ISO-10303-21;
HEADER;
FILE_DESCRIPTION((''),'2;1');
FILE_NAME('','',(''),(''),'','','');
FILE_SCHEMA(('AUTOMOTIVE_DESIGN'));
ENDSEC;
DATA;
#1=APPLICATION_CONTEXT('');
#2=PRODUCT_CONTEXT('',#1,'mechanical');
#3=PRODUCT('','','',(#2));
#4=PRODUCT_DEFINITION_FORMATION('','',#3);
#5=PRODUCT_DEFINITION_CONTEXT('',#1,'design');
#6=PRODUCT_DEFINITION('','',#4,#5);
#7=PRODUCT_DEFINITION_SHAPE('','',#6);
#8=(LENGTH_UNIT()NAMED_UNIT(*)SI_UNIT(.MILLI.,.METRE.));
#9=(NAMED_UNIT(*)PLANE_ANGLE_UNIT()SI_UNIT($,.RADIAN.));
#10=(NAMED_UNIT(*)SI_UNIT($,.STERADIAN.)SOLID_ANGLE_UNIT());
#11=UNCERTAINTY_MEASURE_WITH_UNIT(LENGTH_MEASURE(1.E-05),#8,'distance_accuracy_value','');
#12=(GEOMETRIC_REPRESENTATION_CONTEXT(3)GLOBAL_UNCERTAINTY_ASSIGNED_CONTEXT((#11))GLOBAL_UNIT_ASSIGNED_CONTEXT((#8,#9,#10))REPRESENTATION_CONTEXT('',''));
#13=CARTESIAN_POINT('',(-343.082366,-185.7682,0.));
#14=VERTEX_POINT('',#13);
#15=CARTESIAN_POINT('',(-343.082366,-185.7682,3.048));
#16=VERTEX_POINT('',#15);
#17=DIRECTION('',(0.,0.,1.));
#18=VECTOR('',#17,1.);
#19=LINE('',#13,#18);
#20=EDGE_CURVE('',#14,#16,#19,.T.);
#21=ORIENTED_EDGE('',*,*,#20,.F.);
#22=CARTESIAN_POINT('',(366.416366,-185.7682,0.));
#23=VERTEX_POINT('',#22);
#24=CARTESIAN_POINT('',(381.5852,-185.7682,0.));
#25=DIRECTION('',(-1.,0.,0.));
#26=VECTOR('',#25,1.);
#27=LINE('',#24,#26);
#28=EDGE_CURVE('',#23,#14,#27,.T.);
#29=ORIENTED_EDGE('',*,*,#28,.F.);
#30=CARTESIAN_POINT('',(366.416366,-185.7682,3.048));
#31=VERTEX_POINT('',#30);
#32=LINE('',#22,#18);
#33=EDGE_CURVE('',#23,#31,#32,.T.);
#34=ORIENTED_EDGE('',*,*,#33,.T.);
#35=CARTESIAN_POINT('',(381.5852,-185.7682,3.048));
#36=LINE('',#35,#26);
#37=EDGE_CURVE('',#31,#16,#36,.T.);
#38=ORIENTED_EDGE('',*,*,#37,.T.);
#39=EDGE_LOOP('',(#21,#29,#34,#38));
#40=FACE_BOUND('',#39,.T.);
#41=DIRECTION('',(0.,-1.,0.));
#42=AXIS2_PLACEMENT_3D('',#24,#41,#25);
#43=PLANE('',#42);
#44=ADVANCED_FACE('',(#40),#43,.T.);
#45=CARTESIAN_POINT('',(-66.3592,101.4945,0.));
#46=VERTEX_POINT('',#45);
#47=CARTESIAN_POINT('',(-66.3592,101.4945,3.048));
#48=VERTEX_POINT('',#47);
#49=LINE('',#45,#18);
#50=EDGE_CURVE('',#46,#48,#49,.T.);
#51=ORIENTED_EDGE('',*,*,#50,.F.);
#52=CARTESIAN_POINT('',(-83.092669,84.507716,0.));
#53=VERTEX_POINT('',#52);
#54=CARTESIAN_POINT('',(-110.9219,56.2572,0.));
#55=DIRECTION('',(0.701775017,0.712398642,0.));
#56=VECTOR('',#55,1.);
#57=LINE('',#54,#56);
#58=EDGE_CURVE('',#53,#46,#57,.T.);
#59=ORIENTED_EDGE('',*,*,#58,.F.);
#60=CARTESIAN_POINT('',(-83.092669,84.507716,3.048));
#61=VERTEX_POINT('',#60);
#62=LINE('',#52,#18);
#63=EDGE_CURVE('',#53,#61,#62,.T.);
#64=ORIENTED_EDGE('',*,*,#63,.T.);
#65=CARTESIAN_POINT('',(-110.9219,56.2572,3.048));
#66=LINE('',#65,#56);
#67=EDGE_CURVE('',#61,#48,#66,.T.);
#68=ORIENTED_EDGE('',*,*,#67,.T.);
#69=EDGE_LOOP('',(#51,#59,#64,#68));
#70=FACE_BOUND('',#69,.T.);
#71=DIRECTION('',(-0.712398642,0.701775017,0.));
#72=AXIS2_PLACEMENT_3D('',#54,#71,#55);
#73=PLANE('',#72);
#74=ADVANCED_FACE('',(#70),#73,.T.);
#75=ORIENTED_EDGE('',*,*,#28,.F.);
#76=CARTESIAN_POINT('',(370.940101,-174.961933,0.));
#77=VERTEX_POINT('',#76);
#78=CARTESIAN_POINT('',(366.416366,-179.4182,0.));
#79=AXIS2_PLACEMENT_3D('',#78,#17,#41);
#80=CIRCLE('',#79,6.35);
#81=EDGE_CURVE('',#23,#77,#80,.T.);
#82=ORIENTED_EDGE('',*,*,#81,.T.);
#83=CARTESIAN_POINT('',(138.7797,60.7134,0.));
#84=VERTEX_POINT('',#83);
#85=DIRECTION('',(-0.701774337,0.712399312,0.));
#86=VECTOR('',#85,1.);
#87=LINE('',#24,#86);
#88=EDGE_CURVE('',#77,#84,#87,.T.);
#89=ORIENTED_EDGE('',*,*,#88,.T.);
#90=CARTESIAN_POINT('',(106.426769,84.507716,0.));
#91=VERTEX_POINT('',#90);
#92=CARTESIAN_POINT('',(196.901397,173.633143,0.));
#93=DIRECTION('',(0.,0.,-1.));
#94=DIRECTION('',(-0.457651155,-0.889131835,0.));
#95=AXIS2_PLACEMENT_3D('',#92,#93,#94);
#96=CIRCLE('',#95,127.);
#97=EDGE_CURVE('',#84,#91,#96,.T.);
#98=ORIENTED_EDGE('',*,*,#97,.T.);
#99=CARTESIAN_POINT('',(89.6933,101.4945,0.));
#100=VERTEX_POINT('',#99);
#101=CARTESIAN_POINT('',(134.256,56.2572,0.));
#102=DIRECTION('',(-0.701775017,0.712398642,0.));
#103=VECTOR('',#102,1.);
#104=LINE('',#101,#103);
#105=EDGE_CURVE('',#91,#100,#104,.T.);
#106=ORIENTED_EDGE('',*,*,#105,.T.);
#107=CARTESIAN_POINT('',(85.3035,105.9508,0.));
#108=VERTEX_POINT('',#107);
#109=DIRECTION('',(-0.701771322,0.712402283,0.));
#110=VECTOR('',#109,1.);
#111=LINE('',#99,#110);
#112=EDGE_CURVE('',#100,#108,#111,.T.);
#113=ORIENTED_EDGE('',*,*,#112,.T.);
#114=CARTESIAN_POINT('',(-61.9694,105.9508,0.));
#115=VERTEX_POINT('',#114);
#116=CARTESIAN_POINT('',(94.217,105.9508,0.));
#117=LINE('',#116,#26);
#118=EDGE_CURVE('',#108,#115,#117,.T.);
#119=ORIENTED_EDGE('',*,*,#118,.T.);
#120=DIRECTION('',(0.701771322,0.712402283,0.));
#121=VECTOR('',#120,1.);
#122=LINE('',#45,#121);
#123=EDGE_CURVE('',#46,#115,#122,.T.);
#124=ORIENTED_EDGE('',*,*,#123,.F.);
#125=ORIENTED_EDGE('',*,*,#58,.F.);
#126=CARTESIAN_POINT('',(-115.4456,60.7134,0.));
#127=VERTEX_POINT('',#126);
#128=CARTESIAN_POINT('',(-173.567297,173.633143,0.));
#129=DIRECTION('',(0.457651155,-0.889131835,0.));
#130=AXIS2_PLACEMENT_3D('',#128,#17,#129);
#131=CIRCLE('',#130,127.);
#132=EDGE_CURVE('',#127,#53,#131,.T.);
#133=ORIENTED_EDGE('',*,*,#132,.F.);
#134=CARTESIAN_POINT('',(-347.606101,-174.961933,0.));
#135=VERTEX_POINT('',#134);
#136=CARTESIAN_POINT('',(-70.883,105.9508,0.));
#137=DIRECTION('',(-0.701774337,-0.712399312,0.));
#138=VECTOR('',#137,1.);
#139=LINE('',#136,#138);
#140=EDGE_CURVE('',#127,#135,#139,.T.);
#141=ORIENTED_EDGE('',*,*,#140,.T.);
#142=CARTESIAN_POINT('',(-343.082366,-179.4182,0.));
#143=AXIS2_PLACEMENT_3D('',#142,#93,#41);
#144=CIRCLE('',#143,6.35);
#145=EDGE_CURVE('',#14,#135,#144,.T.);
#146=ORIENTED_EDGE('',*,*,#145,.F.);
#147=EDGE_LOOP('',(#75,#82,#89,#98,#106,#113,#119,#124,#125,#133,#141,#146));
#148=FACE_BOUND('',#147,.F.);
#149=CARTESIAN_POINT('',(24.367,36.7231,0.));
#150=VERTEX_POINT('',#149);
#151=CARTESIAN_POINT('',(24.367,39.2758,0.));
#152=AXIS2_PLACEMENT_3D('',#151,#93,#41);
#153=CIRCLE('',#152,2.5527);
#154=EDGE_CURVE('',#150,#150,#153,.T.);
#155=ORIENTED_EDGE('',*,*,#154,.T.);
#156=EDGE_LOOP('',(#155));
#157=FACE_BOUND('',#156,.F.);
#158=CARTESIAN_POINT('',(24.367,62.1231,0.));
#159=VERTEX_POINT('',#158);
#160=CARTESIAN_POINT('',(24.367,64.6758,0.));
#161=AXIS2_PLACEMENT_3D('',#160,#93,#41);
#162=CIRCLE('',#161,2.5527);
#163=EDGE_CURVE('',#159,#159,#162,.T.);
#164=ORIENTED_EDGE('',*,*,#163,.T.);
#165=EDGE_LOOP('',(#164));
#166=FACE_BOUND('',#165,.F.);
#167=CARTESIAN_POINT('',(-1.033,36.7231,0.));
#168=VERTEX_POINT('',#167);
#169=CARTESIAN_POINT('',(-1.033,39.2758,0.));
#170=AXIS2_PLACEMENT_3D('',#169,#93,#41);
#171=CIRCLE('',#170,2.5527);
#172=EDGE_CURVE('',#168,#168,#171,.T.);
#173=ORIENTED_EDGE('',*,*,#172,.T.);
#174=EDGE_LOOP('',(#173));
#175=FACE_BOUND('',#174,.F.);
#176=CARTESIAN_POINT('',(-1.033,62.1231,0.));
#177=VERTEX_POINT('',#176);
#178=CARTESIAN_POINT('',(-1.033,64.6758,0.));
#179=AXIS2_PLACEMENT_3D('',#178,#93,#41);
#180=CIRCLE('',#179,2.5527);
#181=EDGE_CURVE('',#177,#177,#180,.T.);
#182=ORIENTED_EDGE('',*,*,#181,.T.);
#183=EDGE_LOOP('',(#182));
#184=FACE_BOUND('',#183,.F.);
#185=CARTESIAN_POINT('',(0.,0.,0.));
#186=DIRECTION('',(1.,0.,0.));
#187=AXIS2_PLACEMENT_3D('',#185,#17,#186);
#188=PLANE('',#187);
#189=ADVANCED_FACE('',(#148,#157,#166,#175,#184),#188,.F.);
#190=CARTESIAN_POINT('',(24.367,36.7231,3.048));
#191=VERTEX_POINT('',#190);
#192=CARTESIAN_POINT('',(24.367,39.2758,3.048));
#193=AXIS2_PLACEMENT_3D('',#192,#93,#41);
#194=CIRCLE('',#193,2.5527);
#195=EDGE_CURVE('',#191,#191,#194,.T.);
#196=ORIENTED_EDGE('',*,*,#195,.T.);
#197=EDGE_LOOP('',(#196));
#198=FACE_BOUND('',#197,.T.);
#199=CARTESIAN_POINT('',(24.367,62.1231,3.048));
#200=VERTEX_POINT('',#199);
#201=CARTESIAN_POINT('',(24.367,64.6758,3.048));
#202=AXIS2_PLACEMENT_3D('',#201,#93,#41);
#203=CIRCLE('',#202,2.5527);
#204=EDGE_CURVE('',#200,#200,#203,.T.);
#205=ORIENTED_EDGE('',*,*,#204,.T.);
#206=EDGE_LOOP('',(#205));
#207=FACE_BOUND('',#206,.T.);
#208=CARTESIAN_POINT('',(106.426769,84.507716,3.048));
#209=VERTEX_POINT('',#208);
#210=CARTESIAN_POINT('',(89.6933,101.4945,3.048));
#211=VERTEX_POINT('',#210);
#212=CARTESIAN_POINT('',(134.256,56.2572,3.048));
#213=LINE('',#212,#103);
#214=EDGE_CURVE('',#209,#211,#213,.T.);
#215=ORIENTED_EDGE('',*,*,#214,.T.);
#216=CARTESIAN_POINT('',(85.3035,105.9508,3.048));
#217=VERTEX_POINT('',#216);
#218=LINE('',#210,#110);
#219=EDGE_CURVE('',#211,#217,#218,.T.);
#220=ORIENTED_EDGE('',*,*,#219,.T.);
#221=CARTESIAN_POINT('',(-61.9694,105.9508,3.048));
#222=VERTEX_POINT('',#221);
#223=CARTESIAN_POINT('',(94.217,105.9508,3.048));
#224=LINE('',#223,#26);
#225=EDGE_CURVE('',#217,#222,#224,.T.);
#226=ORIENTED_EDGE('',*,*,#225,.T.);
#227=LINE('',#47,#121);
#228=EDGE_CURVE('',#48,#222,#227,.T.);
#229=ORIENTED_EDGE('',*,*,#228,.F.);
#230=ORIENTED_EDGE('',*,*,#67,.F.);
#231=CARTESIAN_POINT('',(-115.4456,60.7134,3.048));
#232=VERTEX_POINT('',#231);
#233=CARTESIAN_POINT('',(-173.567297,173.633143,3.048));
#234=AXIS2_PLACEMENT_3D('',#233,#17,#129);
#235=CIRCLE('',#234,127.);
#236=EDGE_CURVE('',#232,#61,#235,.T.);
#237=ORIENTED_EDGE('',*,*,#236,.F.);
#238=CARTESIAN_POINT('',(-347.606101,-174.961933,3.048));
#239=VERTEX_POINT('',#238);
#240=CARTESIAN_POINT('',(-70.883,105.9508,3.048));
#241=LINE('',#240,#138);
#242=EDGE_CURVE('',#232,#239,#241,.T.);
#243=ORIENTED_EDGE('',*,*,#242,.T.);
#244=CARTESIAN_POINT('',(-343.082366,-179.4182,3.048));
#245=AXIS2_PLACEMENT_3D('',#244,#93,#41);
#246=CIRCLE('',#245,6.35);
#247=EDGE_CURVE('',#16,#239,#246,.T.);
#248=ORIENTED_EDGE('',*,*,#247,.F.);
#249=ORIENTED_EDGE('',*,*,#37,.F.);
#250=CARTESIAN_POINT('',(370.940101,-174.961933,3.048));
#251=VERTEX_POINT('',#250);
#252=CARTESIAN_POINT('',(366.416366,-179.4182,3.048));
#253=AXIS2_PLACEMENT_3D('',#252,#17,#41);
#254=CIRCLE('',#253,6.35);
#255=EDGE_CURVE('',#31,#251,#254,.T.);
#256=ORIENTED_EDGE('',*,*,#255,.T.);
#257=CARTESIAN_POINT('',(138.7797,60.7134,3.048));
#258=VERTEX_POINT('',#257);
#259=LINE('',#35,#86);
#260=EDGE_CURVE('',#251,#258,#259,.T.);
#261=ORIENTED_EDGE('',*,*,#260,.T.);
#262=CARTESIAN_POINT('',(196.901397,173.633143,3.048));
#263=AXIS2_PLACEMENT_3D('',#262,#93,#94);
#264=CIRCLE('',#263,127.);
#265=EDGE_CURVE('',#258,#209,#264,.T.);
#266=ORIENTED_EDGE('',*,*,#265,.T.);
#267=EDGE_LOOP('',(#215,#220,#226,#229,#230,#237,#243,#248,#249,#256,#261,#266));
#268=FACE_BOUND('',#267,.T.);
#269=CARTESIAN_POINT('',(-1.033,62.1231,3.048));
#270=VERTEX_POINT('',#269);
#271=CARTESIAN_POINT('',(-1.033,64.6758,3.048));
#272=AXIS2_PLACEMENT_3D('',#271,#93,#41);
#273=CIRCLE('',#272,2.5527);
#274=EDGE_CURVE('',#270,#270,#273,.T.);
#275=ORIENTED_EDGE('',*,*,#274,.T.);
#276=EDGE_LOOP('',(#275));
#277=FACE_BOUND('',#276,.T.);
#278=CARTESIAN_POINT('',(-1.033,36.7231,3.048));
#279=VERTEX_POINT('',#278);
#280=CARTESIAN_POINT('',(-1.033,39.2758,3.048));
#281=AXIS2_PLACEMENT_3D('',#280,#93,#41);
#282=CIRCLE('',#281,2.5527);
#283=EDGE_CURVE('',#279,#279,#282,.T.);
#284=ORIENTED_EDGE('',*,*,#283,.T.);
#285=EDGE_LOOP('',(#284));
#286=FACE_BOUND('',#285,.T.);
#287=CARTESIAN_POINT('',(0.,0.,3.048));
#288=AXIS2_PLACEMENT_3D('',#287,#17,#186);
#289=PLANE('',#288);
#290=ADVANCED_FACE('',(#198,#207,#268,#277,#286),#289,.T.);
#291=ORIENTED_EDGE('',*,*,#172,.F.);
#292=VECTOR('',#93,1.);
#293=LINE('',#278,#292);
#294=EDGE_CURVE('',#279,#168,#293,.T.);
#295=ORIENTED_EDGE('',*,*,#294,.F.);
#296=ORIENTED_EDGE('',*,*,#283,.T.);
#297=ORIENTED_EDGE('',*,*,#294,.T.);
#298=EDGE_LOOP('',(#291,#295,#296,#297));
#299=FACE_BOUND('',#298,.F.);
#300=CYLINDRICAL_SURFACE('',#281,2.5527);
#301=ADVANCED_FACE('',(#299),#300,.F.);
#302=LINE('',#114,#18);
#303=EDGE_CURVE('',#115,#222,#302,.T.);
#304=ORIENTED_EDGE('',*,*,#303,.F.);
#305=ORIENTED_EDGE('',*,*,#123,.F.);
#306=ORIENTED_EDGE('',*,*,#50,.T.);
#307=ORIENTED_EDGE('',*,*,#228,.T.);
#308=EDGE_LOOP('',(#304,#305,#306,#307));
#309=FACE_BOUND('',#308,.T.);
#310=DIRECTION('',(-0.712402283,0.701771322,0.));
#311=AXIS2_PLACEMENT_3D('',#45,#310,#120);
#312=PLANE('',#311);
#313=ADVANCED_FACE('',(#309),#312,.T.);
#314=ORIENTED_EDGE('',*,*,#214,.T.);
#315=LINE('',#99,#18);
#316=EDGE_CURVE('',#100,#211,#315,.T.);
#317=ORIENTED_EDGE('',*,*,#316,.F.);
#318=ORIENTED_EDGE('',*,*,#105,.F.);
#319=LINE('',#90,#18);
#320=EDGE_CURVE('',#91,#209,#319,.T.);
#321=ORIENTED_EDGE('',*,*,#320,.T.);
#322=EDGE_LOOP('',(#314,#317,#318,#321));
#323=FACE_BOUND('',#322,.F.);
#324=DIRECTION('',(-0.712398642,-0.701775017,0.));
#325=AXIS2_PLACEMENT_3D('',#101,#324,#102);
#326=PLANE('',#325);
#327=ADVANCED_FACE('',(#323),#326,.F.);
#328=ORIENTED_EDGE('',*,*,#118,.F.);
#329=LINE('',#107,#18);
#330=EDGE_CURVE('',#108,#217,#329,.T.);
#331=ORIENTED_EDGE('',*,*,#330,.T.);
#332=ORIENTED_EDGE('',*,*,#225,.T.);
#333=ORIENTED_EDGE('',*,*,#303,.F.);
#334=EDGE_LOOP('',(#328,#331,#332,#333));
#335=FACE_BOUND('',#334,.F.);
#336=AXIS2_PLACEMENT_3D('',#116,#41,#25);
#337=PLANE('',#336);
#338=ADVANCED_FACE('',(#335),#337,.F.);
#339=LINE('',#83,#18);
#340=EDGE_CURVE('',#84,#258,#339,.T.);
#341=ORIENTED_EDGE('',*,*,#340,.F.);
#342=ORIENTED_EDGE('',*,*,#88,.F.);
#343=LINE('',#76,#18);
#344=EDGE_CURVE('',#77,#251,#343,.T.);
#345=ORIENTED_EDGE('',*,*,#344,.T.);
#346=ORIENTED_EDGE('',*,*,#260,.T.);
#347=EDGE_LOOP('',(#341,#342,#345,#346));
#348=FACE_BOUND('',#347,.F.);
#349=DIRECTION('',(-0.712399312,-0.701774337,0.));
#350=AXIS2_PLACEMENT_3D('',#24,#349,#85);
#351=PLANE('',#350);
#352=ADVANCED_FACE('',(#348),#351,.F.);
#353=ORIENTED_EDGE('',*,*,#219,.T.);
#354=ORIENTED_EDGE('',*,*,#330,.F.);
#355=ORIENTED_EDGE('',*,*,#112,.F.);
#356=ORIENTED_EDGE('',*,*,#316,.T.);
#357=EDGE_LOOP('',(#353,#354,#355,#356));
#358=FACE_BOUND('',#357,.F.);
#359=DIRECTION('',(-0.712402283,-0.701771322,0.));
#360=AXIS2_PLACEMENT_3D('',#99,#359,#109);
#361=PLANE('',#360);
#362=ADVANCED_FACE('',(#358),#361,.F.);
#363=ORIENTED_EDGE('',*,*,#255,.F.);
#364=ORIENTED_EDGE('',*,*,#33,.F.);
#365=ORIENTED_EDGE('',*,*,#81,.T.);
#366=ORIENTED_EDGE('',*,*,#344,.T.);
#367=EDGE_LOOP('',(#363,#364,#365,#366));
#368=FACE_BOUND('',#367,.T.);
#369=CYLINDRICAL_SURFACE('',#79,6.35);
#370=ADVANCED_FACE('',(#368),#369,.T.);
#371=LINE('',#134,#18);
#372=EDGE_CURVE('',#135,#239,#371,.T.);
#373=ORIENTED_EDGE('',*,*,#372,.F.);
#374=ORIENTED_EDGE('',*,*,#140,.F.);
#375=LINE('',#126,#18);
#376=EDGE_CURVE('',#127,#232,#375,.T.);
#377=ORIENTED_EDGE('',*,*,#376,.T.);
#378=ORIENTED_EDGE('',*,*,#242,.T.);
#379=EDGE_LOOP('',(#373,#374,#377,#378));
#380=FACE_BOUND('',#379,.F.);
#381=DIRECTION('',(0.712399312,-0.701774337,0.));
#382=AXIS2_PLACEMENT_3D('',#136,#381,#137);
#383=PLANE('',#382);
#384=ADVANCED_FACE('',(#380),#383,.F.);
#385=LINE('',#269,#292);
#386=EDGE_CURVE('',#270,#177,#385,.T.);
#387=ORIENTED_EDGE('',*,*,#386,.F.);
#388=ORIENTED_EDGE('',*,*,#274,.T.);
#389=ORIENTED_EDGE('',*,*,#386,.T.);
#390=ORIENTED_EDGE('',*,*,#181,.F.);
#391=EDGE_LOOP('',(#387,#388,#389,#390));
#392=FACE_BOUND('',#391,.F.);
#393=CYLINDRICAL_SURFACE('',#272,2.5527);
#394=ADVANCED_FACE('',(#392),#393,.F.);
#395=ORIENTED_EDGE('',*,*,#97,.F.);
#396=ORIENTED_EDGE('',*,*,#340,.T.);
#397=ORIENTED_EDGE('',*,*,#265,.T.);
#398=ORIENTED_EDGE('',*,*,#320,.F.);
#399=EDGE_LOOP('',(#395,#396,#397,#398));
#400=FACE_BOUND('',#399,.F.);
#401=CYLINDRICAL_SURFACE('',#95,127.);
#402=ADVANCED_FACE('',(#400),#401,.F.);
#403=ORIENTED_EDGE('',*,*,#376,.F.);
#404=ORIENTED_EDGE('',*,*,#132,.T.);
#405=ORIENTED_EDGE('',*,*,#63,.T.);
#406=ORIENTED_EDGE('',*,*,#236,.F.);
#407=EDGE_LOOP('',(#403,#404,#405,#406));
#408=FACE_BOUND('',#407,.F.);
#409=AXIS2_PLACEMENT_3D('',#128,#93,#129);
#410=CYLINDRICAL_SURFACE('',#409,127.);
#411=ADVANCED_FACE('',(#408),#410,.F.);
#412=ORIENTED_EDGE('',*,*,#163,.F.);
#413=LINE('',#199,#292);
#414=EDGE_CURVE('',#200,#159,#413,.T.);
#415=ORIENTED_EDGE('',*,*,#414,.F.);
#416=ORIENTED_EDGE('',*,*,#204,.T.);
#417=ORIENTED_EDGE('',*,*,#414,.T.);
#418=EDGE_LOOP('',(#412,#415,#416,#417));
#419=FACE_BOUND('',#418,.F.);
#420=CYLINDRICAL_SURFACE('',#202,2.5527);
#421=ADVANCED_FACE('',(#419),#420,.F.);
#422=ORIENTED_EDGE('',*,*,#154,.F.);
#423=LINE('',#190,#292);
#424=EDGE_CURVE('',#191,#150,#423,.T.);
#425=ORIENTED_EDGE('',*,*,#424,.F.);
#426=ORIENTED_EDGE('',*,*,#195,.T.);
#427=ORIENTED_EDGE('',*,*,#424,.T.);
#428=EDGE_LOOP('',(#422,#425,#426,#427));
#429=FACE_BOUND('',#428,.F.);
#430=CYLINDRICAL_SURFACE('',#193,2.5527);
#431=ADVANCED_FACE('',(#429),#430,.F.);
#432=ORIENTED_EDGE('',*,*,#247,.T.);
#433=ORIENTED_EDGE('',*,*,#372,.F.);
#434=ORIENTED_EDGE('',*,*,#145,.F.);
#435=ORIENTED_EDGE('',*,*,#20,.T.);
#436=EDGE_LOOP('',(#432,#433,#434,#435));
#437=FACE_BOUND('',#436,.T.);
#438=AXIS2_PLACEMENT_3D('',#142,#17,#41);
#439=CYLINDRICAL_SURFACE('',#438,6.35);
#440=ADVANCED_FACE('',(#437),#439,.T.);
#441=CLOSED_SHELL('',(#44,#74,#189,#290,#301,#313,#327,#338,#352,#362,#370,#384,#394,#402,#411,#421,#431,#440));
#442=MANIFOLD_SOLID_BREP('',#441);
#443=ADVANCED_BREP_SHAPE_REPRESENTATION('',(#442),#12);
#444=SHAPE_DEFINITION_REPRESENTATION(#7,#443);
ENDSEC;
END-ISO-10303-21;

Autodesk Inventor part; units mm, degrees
ref_plane "YZ Plane" through (0, 0, 0) normal (1, 0, 0) x (0, 1, 0)
ref_plane "XZ Plane" through (0, 0, 0) normal (0, 1, 0) x (-1, 0, 0)
ref_plane "XY Plane" through (0, 0, 0) normal (0, 0, 1) x (1, 0, 0)
sketch "Sketch1" plane through (0, 0, 0) normal (0, 0, 1) x (1, 0, 0)
  line L0 (381.5852, -185.7682) -> (94.217, 105.9508)
  line L1 (94.217, 105.9508) -> (-70.883, 105.9508)
  line L2 (-70.883, 105.9508) -> (-358.2512, -185.7682)
  line L3 (1105.6551, 353.06) -> (-810.8916, 353.06) construction
  line L4 (381.5852, -185.7682) -> (-358.2512, -185.7682)
  dimension "d4" = 165.1
  dimension "d7" = 291.719
extrude "Plate1" add sketch "Sketch1" along normal blind 3.048
sketch "Sketch2" plane through (0, 0, 3.048) normal (0, 0, 1) x (1, 0, 0)
  line L0 (94.217, 105.9508) -> (381.5852, -185.7682) construction
  line L1 (-70.883, 105.9508) -> (94.217, 105.9508) construction
  line L2 (-358.2512, -185.7682) -> (-70.883, 105.9508) construction
  line L3 (381.5852, -185.7682) -> (-358.2512, -185.7682) construction
  line L4 (11.667, 105.9508) -> (11.667, -185.7682) construction
  point P0 (0, 0)
  point P1 (24.367, 64.6758)
  point P2 (24.367, 39.2758)
  point P3 (-1.033, 64.6758)
  point P4 (-1.033, 39.2758)
  dimension "d8" = 12.7
  dimension "d9" = 41.275
  dimension "d10" = 25.4
hole "Hole1" at (24.367, 64.6758, 3.048) at (24.367, 39.2758, 3.048) at (-1.033, 39.2758, 3.048) at (-1.033, 64.6758, 3.048) direction (0, 0, -1) diameter 5.1054 end through all clearance for "Flat Head Machine Screw (82)" size "#10" standard "Ansi Unified Screw Threads"
sketch "Sketch3" plane through (0, 0, 0) normal (0, 0, -1) x (-1, 0, 0)
  circle A0 centre (1.033, 64.6758) radius 2.5527 construction
  circle A1 centre (1.033, 39.2758) radius 2.5527 construction
  circle A2 centre (-24.367, 39.2758) radius 2.5527 construction
  circle A3 centre (-24.367, 64.6758) radius 2.5527 construction
  line L0 (-94.217, 105.9508) -> (70.883, 105.9508) projected
  line L1 (-381.5852, -185.7682) -> (-94.217, 105.9508) construction
  line L2 (358.2512, -185.7682) -> (-381.5852, -185.7682) construction
  line L3 (70.883, 105.9508) -> (358.2512, -185.7682) construction
  line L4 (115.4456, 60.7134) -> (110.9219, 56.2572)
  line L5 (110.9219, 56.2572) -> (66.3592, 101.4945)
  line L6 (66.3592, 101.4945) -> (70.883, 105.9508)
  line L7 (70.883, 105.9508) -> (115.4456, 60.7134)
  line L8 (66.3592, 101.4945) -> (61.9694, 105.9508)
  line L9 (-11.667, 105.9508) -> (-11.667, 80.5508) construction
  line L10 (-11.667, 105.9508) -> (13.733, 105.9508) construction
  line L11 (-138.7797, 60.7134) -> (-134.256, 56.2572)
  line L12 (-134.256, 56.2572) -> (-89.6933, 101.4945)
  line L13 (-94.217, 105.9508) -> (-138.7797, 60.7134)
  line L14 (-89.6933, 101.4945) -> (-85.3035, 105.9508)
  line L15 (-85.3035, 105.9508) -> (-134.256, 56.2572)
  line L16 (-134.256, 56.2572) -> (-138.7797, 60.7134)
  line L17 (-138.7797, 60.7134) -> (-94.217, 105.9508)
  line L18 (-94.217, 105.9508) -> (-85.3035, 105.9508)
  line L19 (70.883, 105.9508) -> (61.9694, 105.9508)
  point P0 (0, 0)
  dimension "d18" = 6.35
  dimension "d19" = 63.5
  dimension "d20" = 25.4
  dimension "d21" = 90
extrude "Cut1" cut sketch "Sketch3" against normal blind 3.048
fillet "Corner Round1" radius 6.35 2 edges at (-358.2512, -185.7682, 1.524) (381.5852, -185.7682, 1.524)
fillet "Corner Round2" radius 127 2 edges at (-110.9219, 56.2572, 1.524) (134.256, 56.2572, 1.524)
equation "\"d16\" = Thickness"
equation "\"d22\" = Thickness"
equation "\"d2\" = Thickness"
equation "\"BendRadius\" = Thickness"
equation "\"BendReliefWidth\" = Thickness"
equation "\"BendReliefDepth\" = 0.5 * Thickness"
equation "\"CornerReliefSize\" = 4 * Thickness"
equation "\"MinimumRemnant\" = 2 * Thickness"
equation "\"TransitionRadius\" = BendRadius"
equation "\"JacobiRadiusSize\" = BendRadius"
equation "\"GapSize\" = Thickness"
equation "\"Thickness\" = 3.048"
properties part number "hopper_back_plate" material "Polycarbonate, Smoke"
